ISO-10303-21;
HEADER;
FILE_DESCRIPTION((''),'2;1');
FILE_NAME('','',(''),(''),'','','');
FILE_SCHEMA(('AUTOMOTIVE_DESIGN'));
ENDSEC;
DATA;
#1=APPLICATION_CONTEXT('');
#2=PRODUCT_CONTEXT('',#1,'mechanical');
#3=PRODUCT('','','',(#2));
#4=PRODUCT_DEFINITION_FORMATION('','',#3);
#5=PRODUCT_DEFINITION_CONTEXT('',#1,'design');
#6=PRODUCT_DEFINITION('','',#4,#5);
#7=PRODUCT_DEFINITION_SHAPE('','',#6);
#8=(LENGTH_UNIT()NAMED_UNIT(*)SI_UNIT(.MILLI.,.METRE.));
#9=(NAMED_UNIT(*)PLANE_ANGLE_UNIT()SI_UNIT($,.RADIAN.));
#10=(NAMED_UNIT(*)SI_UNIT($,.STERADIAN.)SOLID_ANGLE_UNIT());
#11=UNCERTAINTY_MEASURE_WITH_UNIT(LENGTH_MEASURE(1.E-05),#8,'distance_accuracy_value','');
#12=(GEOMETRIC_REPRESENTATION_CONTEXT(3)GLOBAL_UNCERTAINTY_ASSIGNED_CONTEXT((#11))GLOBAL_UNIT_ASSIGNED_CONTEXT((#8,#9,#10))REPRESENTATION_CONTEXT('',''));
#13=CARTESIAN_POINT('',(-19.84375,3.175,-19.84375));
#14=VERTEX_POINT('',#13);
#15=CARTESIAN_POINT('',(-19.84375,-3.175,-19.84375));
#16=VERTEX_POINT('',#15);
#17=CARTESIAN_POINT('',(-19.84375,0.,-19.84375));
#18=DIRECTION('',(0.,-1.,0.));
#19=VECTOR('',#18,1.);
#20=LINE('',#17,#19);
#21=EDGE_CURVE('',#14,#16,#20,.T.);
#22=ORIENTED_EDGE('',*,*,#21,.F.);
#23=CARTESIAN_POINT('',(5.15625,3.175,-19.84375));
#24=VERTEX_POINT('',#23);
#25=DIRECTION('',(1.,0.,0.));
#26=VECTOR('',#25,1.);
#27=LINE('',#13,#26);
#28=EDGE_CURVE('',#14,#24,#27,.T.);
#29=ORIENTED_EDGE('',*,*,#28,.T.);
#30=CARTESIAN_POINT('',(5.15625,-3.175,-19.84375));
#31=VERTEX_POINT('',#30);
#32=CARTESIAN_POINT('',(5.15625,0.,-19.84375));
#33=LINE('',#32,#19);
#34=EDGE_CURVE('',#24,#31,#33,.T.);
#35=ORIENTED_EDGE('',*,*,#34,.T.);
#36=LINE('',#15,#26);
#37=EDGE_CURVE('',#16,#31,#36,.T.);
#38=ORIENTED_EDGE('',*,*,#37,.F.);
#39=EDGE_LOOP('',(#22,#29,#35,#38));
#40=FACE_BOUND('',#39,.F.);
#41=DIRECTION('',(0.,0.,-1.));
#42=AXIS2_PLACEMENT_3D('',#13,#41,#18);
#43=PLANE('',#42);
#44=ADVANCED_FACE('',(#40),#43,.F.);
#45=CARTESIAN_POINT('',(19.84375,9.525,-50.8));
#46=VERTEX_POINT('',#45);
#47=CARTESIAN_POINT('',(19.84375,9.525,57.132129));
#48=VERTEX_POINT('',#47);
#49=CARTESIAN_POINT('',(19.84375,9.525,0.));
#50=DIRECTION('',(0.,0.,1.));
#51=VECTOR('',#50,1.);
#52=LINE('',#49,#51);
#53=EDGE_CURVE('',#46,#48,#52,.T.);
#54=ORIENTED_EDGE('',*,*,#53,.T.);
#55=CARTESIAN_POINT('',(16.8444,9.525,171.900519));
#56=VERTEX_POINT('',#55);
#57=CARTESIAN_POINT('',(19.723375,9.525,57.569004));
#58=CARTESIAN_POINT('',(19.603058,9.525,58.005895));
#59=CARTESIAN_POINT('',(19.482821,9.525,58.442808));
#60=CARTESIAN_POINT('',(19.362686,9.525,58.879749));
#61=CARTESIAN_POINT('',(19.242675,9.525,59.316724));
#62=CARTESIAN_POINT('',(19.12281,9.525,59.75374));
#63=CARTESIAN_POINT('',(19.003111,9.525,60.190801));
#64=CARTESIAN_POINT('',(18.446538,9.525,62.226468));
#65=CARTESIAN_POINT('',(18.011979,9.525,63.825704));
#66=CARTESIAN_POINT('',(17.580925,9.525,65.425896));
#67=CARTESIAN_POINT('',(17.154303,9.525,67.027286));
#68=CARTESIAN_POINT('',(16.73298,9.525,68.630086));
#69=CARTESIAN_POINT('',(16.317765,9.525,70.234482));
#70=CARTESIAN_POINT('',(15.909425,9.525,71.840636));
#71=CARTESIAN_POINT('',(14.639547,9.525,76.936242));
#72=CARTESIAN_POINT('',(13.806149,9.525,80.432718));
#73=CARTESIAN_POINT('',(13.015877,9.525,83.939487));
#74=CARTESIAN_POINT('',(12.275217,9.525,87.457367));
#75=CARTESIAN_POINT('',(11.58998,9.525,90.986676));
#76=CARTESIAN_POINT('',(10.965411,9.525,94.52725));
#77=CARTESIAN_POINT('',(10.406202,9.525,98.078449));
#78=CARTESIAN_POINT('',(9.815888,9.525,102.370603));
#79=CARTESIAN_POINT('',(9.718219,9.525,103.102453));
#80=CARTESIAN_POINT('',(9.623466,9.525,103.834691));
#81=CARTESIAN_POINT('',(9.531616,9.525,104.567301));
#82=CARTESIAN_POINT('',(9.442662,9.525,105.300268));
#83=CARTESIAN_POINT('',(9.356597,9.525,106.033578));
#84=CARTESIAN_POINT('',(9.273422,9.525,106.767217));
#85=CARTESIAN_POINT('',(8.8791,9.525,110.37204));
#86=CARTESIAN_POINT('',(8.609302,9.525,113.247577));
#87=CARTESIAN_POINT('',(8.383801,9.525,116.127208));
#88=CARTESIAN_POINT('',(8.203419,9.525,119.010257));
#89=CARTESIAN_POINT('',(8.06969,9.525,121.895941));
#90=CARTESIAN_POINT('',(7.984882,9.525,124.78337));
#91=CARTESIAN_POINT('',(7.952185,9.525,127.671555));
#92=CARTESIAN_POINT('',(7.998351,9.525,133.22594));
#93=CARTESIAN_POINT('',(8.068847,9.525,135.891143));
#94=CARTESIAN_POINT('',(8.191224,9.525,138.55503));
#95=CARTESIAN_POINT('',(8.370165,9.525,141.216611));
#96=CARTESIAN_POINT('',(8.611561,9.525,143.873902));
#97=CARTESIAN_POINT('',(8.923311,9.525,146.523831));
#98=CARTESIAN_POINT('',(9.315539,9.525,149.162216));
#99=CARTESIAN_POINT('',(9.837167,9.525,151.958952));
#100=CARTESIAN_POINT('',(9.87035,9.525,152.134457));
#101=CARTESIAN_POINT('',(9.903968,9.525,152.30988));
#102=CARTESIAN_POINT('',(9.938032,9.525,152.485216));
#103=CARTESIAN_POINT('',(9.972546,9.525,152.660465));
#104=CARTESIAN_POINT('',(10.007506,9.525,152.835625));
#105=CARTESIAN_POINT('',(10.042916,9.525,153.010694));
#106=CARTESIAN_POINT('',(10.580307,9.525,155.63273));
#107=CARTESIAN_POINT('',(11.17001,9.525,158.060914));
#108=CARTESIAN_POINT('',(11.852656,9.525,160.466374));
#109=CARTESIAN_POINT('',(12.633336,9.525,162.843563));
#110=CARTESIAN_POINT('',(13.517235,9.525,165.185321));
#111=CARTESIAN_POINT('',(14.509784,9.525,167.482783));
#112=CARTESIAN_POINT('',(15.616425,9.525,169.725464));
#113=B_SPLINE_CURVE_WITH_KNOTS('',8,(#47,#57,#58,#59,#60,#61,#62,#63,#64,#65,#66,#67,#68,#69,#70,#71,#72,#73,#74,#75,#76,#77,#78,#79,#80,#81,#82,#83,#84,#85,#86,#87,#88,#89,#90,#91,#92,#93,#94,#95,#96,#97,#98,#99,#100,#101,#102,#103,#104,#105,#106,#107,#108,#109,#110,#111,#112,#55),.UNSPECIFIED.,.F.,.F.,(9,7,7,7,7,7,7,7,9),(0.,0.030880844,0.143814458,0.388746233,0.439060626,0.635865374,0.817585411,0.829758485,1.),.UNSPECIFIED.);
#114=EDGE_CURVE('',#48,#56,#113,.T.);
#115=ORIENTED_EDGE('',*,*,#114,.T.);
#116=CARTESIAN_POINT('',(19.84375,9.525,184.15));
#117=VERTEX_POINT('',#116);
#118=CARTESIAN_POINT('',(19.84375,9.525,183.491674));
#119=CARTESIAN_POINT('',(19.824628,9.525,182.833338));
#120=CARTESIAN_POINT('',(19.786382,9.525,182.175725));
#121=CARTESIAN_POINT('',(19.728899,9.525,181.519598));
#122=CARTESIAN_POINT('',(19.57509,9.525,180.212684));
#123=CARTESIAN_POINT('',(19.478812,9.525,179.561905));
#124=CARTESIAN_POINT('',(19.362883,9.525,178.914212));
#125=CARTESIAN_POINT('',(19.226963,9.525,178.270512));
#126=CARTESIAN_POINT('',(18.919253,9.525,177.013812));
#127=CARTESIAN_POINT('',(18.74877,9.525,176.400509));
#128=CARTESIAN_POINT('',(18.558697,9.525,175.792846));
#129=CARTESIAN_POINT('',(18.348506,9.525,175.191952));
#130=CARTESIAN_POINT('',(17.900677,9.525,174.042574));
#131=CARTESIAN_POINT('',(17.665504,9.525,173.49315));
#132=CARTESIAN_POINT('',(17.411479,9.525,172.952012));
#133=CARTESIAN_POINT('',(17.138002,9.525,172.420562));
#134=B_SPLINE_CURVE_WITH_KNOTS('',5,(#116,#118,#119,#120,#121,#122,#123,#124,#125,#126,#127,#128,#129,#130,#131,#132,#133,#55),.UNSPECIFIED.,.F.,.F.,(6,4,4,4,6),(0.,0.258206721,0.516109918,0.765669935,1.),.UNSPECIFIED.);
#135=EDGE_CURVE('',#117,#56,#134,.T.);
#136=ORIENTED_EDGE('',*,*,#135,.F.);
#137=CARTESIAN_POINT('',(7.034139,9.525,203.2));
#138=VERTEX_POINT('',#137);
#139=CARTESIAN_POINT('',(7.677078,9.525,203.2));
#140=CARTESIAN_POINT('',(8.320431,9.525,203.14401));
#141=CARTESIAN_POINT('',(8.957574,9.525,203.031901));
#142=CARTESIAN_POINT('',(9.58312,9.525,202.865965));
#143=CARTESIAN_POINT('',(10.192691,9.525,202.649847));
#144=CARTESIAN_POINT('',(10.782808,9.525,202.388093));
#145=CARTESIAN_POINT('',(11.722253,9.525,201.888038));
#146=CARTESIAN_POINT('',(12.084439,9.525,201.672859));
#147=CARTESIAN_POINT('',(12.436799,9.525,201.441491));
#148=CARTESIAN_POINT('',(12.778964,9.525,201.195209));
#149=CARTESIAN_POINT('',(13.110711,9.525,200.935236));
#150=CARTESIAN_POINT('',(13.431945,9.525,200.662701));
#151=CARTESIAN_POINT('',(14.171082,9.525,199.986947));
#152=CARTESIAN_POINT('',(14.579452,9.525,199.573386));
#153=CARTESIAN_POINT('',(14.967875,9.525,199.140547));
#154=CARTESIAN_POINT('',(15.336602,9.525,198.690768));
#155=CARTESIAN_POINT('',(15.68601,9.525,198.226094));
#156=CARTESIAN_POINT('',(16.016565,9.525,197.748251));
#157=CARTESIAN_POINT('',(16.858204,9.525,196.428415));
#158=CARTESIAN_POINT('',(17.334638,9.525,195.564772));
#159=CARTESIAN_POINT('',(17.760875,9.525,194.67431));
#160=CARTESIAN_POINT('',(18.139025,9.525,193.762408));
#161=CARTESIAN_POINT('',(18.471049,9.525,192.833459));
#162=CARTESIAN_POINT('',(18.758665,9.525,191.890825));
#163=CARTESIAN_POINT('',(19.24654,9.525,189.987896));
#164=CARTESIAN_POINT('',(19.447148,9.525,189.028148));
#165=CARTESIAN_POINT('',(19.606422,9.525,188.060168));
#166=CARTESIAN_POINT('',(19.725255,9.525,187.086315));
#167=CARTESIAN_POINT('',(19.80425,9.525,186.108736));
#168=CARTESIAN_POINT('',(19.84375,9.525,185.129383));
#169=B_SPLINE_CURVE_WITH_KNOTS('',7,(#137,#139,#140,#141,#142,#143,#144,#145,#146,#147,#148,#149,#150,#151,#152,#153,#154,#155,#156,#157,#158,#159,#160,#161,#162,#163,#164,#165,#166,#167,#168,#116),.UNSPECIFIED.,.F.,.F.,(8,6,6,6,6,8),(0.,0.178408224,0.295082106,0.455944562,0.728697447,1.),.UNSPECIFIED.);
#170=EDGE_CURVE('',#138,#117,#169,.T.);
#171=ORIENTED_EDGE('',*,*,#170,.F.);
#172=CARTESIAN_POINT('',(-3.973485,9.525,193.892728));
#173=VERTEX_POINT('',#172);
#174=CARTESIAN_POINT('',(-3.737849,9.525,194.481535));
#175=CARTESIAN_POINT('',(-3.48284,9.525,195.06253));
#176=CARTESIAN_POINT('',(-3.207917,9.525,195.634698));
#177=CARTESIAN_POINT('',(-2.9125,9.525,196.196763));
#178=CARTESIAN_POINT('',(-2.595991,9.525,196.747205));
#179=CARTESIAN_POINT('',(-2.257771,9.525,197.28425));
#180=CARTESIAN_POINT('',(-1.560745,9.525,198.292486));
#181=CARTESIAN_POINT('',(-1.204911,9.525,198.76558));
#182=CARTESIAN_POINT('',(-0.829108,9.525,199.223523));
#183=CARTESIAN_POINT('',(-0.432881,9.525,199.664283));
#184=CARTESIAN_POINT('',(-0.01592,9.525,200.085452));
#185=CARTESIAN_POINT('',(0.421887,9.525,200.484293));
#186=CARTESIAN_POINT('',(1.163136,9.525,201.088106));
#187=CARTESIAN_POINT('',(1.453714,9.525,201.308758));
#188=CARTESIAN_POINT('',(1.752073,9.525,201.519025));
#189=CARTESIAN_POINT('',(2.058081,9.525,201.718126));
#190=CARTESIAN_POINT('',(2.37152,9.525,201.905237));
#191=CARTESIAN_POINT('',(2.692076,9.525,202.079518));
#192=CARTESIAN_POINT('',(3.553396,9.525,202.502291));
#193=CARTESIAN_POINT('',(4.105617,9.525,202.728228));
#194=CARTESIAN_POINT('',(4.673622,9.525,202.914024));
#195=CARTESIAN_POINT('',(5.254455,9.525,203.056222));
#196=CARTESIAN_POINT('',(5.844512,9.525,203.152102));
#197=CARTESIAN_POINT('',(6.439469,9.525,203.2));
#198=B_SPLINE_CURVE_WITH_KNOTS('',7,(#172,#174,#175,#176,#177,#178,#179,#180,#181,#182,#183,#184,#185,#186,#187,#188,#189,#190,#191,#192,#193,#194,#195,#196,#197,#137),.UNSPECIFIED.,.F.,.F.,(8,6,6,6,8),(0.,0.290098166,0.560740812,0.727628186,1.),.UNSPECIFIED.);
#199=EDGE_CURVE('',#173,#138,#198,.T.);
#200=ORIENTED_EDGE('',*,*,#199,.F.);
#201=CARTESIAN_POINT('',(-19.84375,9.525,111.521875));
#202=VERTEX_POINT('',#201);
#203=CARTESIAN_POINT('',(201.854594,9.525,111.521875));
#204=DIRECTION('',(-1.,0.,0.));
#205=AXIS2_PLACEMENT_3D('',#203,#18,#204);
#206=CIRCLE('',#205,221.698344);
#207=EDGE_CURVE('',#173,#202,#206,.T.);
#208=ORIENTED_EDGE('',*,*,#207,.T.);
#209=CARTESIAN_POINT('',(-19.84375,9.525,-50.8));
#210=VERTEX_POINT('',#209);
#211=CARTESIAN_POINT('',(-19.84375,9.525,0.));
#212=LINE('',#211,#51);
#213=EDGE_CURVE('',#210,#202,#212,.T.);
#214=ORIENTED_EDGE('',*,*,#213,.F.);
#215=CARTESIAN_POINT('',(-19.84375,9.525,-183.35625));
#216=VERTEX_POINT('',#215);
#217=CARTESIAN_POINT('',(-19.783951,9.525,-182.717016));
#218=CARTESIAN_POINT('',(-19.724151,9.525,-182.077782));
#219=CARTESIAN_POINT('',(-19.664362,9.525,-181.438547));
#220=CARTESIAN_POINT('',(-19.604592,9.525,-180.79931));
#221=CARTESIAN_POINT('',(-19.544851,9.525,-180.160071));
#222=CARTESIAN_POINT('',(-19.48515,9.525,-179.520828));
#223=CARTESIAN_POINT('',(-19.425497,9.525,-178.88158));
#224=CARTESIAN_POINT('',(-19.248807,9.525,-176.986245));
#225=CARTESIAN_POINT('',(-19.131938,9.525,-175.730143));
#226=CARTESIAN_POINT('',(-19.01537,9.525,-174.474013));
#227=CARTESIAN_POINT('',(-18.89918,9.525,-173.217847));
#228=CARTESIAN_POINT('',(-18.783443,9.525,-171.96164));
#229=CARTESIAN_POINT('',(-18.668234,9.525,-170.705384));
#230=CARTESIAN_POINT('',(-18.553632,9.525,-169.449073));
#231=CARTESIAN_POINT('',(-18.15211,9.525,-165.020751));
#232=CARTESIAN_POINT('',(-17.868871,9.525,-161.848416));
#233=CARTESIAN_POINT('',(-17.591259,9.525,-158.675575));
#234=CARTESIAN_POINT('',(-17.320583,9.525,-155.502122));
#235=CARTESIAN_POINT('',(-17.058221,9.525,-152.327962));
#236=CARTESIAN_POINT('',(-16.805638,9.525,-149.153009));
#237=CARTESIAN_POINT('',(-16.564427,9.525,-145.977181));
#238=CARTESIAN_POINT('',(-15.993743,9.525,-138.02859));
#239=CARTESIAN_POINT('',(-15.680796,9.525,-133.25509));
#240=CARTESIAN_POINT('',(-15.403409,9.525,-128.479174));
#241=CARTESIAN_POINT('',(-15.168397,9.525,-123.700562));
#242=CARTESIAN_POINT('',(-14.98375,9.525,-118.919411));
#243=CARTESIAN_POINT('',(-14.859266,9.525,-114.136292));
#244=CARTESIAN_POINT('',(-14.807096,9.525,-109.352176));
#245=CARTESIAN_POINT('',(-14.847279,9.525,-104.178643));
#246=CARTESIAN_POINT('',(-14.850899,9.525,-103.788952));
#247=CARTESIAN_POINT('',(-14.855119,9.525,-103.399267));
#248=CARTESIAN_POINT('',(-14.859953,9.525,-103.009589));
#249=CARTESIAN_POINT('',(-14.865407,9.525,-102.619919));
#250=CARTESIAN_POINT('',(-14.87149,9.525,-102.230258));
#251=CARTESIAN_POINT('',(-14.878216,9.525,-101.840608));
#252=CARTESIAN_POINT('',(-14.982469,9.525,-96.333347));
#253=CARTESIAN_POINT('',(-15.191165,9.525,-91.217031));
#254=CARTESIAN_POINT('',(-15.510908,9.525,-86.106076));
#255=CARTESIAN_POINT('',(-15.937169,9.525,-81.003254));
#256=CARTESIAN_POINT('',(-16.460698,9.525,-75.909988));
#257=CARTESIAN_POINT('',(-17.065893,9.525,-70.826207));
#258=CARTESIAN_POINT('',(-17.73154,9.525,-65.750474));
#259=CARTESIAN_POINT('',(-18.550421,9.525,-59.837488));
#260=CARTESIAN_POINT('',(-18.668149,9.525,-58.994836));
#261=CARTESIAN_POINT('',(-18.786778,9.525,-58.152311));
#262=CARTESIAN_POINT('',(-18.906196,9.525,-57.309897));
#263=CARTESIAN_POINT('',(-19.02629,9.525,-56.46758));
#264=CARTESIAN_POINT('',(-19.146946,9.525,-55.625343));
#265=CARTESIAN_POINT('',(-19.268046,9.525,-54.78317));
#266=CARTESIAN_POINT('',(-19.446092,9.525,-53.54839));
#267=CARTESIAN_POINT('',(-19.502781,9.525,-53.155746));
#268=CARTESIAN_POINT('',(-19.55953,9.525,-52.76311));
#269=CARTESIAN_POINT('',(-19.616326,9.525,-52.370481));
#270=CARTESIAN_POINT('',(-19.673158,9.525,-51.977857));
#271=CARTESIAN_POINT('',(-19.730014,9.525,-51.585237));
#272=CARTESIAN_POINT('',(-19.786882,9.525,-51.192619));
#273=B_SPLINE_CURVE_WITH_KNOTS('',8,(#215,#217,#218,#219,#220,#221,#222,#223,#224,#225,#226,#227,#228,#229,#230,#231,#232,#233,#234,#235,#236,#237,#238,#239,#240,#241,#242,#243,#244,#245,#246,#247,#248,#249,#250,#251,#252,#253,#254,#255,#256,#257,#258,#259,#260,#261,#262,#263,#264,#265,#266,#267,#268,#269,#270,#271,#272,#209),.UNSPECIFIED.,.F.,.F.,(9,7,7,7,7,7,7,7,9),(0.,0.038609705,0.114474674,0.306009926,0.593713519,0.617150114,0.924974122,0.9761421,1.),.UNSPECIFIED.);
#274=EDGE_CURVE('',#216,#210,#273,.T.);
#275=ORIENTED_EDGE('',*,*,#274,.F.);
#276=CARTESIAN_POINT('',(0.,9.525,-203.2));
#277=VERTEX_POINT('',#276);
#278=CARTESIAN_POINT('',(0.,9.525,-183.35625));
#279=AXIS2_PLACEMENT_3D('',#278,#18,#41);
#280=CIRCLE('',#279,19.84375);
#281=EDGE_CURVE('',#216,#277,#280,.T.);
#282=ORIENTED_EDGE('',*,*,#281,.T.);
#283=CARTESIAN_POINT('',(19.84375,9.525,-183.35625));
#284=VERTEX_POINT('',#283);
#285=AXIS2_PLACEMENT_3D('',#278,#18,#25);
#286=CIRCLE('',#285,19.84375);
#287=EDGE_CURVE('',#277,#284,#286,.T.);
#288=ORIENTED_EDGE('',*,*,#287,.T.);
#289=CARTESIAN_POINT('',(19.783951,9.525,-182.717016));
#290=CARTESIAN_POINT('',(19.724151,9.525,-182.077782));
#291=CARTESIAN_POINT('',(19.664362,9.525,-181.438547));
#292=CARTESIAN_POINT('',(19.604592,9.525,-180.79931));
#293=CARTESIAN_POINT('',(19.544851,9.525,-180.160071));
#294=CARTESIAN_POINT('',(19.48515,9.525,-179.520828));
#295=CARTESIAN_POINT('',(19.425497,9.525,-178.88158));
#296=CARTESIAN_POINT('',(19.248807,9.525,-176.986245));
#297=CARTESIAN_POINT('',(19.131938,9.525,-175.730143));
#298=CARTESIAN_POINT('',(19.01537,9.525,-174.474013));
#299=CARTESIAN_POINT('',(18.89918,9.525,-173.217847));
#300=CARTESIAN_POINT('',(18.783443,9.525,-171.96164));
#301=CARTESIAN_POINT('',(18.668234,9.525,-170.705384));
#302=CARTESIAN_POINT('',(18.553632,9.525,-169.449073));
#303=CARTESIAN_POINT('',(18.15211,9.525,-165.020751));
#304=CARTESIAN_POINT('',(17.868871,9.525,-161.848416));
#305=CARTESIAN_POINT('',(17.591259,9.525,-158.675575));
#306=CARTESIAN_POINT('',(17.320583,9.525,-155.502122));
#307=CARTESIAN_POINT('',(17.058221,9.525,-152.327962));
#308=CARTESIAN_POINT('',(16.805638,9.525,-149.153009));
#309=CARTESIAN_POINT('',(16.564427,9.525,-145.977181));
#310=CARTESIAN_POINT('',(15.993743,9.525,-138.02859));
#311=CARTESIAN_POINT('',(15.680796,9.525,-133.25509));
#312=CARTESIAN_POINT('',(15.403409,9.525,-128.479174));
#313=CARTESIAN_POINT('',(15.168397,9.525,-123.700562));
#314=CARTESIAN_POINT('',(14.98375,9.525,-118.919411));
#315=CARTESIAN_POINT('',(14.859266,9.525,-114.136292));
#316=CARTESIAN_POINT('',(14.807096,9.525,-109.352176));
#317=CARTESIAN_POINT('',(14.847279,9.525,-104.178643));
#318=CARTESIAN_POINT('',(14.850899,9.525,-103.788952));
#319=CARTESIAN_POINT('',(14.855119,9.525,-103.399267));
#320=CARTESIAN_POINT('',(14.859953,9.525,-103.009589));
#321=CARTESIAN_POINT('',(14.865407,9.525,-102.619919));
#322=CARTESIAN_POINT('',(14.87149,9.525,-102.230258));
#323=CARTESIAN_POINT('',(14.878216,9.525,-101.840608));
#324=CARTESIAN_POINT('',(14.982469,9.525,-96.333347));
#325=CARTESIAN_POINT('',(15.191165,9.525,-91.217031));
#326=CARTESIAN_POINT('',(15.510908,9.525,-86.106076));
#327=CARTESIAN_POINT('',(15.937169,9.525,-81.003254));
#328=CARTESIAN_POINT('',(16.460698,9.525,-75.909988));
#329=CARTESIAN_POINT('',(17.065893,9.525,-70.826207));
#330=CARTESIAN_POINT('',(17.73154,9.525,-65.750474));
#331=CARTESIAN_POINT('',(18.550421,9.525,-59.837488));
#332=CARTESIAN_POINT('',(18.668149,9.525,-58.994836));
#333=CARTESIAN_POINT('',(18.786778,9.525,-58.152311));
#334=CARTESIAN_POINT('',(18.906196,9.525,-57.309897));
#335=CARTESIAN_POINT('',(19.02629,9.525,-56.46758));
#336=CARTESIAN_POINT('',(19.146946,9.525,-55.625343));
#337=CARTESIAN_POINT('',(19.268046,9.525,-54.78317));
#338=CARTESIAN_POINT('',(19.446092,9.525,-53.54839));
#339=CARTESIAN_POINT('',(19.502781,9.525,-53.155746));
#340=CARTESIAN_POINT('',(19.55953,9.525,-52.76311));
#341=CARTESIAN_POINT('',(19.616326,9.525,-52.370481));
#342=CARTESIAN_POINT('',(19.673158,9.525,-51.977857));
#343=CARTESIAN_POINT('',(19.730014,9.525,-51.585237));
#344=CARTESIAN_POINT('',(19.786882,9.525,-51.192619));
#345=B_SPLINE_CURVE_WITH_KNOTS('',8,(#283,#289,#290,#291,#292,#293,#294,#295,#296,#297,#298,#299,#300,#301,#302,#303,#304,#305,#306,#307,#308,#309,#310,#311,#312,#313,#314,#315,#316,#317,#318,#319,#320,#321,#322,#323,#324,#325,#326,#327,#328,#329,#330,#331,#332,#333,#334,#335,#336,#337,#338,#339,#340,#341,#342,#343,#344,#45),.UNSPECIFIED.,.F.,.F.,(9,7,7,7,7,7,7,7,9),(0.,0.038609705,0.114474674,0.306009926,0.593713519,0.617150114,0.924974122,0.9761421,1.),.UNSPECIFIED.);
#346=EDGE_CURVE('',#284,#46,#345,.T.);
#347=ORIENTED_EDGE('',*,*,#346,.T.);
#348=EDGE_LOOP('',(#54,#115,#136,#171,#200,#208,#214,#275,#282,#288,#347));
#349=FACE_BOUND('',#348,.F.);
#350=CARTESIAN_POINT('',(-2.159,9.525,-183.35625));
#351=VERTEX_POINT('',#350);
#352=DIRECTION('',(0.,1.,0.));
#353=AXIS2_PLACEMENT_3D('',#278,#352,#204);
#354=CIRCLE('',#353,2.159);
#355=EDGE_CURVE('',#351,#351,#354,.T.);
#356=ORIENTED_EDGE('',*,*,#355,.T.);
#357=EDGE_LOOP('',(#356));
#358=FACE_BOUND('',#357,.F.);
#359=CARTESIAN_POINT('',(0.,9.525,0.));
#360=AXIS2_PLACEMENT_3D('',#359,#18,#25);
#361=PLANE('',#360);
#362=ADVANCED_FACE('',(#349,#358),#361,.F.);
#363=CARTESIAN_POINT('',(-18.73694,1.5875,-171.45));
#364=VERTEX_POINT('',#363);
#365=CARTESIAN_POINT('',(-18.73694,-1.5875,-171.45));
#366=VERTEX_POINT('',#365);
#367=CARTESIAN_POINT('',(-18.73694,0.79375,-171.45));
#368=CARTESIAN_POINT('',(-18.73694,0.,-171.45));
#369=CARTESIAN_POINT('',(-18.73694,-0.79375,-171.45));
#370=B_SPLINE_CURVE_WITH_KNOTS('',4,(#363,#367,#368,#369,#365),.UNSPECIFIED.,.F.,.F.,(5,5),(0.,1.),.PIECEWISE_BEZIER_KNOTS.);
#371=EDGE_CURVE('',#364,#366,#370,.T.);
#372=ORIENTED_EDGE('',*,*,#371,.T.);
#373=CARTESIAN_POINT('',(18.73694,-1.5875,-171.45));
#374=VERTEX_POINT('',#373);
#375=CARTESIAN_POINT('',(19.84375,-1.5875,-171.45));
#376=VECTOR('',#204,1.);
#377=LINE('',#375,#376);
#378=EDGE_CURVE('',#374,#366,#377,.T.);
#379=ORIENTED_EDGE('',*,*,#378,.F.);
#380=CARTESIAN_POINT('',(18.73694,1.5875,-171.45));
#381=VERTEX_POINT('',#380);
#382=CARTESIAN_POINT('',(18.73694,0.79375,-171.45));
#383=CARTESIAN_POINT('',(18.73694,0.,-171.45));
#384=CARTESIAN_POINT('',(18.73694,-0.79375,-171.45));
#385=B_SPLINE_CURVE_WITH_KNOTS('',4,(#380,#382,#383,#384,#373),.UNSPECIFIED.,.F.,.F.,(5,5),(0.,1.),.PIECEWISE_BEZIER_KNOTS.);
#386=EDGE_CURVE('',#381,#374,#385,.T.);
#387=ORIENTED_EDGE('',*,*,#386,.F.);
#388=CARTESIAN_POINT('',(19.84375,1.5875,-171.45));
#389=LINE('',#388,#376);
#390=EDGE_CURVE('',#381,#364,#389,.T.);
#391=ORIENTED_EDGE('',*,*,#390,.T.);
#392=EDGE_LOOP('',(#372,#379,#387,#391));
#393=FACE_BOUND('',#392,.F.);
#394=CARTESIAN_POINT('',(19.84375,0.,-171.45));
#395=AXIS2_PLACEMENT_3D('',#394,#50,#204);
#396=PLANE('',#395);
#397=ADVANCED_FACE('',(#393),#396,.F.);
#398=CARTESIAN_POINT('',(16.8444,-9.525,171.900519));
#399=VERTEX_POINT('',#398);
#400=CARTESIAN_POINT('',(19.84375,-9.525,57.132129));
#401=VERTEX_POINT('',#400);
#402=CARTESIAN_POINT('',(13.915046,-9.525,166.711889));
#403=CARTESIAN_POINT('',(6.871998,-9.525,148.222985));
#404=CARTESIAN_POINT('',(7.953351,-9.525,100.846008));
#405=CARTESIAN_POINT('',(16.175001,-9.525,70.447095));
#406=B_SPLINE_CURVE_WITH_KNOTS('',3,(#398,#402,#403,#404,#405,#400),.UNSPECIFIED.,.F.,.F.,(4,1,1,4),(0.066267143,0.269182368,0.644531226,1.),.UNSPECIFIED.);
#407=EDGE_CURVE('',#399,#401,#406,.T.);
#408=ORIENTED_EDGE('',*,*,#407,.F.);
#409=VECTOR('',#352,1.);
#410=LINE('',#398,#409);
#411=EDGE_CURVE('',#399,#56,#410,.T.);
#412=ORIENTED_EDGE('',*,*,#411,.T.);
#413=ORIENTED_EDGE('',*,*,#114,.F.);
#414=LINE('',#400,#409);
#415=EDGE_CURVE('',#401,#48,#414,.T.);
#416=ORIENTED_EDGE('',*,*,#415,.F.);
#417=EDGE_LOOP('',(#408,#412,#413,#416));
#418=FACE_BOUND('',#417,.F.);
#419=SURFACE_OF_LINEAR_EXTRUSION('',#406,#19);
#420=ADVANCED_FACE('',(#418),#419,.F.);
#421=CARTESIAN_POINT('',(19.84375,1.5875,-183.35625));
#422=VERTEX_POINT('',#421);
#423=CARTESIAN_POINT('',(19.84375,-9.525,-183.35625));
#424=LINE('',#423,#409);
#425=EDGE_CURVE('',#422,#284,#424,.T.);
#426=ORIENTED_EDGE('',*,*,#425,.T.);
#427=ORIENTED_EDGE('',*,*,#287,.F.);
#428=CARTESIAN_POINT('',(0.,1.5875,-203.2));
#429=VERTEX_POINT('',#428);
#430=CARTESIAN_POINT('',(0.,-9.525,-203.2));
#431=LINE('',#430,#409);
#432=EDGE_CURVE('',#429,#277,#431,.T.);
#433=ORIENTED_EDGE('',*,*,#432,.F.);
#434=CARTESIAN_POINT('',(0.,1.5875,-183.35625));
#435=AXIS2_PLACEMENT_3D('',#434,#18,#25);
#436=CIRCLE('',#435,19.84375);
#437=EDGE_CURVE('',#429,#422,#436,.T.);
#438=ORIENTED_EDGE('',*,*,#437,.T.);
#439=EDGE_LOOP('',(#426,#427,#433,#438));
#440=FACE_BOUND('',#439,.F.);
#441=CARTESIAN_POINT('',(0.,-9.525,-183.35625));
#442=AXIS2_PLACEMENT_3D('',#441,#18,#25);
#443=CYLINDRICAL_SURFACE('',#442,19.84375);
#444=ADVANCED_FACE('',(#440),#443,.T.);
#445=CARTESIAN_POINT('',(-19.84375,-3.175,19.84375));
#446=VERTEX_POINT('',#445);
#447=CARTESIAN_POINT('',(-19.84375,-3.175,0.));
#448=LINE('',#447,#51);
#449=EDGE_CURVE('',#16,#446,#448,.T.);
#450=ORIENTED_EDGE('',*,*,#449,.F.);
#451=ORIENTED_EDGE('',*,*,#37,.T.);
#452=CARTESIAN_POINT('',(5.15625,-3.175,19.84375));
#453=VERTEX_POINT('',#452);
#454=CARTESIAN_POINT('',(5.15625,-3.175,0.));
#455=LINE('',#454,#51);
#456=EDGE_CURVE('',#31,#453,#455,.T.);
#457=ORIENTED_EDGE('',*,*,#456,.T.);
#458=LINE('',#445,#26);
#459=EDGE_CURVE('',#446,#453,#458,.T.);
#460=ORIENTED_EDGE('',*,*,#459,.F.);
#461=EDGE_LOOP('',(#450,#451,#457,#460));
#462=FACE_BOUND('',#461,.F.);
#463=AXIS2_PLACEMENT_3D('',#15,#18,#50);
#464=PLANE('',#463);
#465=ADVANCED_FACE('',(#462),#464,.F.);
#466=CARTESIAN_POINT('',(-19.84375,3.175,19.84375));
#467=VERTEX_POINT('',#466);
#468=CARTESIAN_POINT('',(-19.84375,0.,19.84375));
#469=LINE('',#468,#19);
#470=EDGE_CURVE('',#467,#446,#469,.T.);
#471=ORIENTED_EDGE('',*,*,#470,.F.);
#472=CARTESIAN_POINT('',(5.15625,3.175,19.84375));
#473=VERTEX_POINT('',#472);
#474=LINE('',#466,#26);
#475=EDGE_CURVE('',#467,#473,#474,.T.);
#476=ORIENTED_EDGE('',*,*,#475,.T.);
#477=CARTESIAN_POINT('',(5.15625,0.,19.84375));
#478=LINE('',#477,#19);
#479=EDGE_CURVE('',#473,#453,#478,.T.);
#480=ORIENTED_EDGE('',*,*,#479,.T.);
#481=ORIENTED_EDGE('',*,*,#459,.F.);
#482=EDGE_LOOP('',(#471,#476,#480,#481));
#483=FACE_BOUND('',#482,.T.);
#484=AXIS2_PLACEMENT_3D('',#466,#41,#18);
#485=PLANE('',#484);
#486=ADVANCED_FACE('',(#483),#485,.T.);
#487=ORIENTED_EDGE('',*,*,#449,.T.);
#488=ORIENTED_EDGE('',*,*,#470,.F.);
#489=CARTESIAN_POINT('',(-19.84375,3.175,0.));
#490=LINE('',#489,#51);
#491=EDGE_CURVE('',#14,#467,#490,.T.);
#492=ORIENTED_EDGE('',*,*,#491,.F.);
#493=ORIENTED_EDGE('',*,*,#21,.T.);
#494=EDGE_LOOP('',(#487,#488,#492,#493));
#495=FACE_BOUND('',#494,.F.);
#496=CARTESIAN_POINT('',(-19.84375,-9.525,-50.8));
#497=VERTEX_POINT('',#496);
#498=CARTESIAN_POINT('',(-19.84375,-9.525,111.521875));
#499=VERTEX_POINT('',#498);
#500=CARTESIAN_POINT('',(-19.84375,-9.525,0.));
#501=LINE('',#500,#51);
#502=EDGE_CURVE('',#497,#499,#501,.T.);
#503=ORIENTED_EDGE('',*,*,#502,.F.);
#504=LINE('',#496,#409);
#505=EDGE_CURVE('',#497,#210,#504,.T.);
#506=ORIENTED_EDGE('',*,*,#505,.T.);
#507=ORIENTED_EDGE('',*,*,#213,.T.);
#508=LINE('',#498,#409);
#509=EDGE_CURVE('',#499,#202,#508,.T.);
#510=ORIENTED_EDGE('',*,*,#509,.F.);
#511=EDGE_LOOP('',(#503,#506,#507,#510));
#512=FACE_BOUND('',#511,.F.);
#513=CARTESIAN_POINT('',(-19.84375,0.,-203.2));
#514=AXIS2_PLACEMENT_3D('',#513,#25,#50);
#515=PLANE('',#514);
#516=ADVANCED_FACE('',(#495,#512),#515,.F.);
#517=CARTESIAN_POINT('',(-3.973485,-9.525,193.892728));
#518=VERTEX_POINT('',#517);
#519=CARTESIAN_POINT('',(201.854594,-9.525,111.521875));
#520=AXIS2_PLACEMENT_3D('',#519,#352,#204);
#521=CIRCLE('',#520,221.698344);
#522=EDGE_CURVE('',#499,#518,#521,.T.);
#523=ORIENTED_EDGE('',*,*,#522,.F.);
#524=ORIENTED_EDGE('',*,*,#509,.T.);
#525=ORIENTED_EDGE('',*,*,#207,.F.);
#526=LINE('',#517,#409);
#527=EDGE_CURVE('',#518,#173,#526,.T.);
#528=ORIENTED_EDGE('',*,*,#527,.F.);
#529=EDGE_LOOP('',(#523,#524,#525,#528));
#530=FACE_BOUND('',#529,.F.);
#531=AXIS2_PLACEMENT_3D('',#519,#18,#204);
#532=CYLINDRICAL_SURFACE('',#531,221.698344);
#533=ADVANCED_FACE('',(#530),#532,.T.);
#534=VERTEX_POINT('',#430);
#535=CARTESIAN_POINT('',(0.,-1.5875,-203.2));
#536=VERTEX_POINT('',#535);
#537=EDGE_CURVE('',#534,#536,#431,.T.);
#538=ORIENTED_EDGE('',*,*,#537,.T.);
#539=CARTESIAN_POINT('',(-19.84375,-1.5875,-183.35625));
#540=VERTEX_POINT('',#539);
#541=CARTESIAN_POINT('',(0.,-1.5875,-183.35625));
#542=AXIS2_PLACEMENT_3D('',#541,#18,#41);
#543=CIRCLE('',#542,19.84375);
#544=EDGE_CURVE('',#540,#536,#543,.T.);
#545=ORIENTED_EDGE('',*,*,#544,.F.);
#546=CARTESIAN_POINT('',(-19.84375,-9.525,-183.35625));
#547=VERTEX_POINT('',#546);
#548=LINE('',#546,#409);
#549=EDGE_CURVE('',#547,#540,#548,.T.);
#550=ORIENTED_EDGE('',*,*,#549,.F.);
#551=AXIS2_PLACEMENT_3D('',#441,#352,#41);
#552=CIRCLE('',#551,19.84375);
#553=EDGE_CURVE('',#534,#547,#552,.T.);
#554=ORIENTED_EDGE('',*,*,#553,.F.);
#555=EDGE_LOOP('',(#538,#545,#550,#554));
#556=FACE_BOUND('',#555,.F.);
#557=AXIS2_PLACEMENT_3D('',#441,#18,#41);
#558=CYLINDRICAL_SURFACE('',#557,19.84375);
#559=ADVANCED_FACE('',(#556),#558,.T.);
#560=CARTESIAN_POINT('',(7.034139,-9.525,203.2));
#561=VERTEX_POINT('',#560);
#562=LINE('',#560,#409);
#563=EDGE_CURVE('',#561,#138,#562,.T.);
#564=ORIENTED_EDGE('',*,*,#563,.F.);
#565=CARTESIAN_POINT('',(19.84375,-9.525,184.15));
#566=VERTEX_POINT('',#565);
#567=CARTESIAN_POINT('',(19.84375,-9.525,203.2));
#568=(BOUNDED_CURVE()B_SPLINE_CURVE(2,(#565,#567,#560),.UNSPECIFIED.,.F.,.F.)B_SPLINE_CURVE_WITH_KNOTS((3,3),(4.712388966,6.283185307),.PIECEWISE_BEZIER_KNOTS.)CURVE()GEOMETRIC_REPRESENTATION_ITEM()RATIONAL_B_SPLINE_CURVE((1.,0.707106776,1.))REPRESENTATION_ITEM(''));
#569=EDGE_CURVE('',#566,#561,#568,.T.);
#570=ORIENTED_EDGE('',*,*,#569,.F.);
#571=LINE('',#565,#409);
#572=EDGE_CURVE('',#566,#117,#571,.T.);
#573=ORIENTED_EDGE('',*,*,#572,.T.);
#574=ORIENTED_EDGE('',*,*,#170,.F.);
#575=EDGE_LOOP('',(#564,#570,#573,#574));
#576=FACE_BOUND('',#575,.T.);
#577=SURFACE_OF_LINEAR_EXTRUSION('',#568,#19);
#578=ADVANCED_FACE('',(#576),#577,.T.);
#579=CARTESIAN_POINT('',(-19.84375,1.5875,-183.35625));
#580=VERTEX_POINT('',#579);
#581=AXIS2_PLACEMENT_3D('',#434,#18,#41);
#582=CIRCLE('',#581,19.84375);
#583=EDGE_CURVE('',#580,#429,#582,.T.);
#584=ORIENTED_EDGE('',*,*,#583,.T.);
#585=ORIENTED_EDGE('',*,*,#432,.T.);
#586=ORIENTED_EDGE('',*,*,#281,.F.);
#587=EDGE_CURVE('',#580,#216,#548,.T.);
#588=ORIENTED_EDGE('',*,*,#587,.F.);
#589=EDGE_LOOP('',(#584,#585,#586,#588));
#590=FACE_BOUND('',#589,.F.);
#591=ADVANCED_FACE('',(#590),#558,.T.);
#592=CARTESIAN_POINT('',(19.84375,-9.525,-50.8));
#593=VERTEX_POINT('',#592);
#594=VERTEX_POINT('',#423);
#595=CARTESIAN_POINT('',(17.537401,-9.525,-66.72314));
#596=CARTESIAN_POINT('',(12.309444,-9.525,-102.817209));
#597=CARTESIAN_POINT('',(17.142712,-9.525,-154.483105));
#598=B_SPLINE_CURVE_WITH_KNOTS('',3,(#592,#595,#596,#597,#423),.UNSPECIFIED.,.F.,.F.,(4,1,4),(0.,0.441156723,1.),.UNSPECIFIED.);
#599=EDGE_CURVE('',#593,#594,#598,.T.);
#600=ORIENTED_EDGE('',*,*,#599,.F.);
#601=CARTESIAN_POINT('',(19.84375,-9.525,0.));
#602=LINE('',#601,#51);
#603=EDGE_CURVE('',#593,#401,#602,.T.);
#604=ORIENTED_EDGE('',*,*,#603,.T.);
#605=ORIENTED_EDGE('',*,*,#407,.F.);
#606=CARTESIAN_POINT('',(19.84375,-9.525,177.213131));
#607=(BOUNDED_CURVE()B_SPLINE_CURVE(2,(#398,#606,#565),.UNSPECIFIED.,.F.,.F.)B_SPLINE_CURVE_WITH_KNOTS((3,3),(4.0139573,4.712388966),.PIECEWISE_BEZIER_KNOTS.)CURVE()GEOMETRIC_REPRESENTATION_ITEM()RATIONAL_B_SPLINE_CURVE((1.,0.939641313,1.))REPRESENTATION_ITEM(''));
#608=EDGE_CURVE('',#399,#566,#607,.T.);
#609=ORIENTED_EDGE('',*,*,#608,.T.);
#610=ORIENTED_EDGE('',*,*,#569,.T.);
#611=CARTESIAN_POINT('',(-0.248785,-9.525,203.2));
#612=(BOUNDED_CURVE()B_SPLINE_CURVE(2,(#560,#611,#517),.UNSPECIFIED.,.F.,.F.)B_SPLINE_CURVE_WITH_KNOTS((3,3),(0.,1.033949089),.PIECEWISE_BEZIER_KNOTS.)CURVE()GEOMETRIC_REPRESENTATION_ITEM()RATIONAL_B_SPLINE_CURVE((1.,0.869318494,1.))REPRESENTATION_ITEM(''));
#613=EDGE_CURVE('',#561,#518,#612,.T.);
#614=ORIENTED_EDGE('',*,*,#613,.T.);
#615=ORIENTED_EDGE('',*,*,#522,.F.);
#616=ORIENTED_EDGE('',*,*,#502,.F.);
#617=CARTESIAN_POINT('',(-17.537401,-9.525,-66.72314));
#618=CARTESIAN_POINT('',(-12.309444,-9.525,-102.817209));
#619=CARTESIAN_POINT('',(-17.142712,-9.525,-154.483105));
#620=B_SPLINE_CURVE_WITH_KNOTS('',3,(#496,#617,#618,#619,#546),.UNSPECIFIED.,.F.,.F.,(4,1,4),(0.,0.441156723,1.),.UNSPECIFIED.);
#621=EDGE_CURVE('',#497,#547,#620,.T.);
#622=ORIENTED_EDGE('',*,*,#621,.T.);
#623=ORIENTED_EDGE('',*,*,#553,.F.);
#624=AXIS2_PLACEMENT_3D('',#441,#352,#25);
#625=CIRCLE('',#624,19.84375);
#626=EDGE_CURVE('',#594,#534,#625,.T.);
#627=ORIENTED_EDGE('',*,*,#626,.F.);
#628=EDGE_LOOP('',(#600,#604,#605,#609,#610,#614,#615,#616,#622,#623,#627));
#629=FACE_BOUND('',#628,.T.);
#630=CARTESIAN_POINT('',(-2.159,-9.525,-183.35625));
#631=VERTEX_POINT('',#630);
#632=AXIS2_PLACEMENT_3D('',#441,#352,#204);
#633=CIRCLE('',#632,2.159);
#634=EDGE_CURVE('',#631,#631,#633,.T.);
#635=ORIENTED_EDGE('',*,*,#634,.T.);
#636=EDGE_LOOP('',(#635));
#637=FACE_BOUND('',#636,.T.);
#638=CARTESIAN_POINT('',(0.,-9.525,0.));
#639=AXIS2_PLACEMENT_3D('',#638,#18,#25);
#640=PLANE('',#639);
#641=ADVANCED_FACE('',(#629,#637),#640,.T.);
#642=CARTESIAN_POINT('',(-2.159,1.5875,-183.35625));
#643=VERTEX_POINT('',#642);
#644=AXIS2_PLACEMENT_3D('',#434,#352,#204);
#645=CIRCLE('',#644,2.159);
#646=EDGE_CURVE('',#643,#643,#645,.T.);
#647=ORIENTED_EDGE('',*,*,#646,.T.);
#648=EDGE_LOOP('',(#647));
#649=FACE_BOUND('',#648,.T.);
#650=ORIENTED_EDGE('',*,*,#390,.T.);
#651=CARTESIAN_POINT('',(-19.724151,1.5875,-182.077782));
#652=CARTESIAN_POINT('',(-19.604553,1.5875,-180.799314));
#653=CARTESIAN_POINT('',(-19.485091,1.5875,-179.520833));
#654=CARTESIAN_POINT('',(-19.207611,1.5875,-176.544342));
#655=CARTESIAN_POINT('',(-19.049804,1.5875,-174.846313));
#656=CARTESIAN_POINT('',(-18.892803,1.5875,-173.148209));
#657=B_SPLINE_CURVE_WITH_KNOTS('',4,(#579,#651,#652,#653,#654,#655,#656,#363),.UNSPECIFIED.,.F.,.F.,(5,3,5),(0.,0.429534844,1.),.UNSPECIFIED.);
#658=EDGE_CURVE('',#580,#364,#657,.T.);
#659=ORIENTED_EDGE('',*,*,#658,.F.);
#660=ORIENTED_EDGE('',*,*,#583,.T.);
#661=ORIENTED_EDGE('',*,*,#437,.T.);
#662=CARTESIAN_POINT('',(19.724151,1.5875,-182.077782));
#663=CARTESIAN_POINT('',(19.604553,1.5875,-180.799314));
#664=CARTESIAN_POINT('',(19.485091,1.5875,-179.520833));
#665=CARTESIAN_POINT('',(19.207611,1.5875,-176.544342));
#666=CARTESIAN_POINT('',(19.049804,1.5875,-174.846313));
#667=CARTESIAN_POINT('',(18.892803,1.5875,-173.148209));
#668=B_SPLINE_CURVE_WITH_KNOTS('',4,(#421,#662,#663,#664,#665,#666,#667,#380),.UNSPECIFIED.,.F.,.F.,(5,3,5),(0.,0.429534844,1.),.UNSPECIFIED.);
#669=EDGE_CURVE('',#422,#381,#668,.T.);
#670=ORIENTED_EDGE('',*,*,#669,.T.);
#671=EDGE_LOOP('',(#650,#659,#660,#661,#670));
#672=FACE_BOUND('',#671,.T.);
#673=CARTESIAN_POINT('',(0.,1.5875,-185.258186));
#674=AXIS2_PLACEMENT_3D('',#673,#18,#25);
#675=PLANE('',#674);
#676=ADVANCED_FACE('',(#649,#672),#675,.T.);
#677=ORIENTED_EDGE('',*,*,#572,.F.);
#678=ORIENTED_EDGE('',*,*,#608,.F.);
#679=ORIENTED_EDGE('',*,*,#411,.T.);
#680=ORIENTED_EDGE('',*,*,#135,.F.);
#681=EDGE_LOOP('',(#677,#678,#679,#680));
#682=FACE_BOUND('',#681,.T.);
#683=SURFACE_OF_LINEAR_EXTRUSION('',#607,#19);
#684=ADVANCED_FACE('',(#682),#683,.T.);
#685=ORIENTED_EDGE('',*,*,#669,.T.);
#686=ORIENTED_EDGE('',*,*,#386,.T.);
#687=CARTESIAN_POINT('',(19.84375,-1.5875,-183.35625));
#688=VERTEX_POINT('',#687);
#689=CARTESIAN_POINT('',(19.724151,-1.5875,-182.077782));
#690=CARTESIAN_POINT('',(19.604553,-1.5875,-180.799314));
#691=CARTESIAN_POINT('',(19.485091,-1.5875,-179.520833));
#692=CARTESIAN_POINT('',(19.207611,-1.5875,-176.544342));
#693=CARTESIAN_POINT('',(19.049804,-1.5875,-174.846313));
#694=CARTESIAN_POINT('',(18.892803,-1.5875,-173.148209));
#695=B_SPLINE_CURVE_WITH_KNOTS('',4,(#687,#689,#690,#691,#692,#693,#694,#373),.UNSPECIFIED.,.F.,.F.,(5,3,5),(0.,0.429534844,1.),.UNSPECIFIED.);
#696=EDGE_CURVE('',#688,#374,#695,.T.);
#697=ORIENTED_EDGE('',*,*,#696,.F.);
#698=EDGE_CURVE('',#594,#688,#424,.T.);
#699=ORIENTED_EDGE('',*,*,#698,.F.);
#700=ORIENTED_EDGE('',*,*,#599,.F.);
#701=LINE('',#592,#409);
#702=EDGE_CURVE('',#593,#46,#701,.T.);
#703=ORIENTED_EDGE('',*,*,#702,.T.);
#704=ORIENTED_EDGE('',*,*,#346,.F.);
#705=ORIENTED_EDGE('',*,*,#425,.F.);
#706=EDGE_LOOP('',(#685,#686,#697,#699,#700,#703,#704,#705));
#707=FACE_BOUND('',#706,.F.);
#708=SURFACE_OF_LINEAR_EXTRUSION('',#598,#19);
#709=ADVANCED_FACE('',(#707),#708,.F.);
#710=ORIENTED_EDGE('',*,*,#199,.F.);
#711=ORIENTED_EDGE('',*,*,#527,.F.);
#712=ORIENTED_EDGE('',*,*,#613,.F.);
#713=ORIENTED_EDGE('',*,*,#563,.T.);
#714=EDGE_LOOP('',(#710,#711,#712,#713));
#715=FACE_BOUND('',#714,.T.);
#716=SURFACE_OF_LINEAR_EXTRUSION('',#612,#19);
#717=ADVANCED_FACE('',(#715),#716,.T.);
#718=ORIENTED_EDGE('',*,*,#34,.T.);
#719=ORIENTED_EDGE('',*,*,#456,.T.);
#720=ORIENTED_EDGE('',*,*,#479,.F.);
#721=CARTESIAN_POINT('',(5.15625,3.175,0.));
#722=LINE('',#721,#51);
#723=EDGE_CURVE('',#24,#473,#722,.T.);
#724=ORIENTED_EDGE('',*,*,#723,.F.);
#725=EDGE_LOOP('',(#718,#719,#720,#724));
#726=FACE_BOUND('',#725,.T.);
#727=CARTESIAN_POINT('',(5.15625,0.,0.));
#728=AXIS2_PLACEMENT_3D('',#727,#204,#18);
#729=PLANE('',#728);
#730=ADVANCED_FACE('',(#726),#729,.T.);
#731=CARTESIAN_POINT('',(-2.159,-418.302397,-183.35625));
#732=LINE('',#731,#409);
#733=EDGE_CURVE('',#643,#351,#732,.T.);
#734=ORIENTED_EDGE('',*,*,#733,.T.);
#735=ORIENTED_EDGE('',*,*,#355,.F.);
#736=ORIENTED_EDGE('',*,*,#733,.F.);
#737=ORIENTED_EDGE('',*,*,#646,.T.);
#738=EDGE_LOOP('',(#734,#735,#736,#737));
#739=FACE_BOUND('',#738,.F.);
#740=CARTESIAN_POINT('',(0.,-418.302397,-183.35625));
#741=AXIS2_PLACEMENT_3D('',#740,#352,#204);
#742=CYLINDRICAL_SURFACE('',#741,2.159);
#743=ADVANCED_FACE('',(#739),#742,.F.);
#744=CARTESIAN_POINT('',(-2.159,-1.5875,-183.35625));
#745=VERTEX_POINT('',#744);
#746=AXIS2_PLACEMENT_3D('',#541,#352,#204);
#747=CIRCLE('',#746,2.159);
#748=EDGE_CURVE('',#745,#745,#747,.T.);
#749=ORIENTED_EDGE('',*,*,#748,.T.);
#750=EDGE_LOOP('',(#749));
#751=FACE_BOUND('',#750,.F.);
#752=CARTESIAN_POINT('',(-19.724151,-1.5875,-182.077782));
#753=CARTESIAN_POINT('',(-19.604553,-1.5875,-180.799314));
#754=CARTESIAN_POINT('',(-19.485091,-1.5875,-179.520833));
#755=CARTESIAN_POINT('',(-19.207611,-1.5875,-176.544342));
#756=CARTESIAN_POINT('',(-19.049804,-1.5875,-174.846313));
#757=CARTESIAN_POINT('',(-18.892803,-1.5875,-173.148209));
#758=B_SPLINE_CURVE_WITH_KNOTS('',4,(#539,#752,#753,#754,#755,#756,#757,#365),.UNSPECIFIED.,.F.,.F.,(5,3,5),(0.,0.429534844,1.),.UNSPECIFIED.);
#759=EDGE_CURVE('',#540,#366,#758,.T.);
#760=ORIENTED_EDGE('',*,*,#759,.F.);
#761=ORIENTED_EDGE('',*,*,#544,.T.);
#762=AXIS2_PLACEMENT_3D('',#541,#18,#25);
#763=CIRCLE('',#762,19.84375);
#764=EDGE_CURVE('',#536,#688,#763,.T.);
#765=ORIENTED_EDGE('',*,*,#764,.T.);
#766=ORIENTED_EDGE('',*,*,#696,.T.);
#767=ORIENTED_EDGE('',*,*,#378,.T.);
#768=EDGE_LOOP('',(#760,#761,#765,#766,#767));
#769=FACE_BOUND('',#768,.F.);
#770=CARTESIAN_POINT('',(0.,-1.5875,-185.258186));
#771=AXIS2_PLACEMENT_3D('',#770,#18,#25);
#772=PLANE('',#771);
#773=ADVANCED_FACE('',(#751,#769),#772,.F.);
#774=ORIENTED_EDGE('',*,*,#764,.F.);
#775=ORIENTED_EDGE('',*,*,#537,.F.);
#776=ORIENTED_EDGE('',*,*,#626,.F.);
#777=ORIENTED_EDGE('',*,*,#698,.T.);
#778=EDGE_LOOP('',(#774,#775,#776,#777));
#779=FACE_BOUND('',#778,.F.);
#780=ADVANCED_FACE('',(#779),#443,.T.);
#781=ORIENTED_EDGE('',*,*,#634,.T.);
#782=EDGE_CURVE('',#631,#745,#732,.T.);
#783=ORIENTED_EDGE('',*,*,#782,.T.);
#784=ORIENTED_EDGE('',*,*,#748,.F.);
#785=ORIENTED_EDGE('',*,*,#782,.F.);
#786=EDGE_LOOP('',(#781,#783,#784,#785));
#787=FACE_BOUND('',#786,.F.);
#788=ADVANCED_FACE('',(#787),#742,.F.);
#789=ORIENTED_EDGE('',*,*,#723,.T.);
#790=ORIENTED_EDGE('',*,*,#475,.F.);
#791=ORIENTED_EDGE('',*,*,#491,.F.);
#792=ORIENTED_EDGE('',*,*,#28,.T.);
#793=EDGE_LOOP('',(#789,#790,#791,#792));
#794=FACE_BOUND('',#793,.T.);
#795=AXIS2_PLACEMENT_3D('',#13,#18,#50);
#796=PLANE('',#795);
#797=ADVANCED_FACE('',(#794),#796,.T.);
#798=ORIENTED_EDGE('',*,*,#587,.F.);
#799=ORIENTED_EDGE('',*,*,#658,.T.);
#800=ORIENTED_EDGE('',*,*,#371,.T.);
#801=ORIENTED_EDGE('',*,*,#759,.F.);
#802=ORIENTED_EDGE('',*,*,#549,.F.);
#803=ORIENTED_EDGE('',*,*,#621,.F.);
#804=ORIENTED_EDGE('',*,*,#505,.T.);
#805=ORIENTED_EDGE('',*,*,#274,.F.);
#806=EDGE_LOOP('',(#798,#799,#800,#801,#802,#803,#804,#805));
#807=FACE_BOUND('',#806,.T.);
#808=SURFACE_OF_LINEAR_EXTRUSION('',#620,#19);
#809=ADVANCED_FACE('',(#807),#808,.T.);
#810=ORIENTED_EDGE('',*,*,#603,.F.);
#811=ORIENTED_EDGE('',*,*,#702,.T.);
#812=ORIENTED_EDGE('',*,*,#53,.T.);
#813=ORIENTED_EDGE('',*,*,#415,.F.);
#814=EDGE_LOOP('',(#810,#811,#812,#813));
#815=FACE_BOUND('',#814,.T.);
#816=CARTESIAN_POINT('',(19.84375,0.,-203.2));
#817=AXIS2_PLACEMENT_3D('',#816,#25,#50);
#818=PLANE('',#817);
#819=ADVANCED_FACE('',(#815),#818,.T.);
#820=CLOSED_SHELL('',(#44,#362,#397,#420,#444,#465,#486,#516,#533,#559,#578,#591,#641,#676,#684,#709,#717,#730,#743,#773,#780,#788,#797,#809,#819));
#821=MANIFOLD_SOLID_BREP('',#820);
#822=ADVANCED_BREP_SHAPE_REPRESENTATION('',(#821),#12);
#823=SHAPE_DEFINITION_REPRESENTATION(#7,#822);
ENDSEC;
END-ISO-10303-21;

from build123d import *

# Parameters (mm, degrees)
F0_W     = 39.6875
F0_H     = 406.4
F1_DEPTH = 9.525
F2_W     = 6.35
F2_H     = 39.6875
F3_DEPTH = 25
F5_DEPTH = 19.051
F7_DEPTH = 1.5875
F9_D     = 4.318


with BuildPart() as f1:
    # F0 (on Front) → F1 (new body, symmetric)
    with BuildSketch(Plane.XZ):
        Rectangle(F0_W, F0_H)
    extrude(amount=F1_DEPTH, both=True)

    # F2 (on face) → F3 (cut)
    with BuildSketch(Plane(origin=(-19.84375, 0, 0), x_dir=(0, -1, 0), z_dir=(-1, 0, 0))):
        Rectangle(F2_W, F2_H)
    extrude(amount=-F3_DEPTH, mode=Mode.SUBTRACT)

    # F4 (on face) → F5 (cut, through all)
    with BuildSketch(Plane.XZ.offset(9.525)):
        with BuildLine():
            Line((7.0341385432, 203.2), (-19.84375, 203.2))
            Line((-19.84375, 203.2), (-19.84375, 111.521875))
            ThreePointArc((-19.84375, 111.521875), (-15.8400316853, 153.4647609056), (-3.9734854925, 193.8927279568))
            add(Edge.make_bspline(
                [(7.0341385432, 203.2), (-0.2487850546, 203.2), (-3.9734854925, 193.8927279568)],
                knots=[0, 0, 0, 1.0339490894, 1.0339490894, 1.0339490894], degree=2, weights=[1, 0.8693184943, 1]))
        make_face()
        with BuildLine():
            Line((19.84375, 203.2), (7.0341385432, 203.2))
            add(Edge.make_bspline(
                [(19.84375, 184.1499997199), (19.8437501883, 203.2), (7.0341385432, 203.2)],
                knots=[4.7123889657, 4.7123889657, 4.7123889657, 6.2831853072, 6.2831853072, 6.2831853072], degree=2, weights=[1, 0.707106776, 1]))
            Line((19.84375, 184.1499997199), (19.84375, 203.2))
        make_face()
        with BuildLine():
            Line((19.84375, 176.5695613803), (19.84375, 184.1499997199))
            add(Edge.make_bspline(
                [(16.84439979, 171.9005189458), (19.8437499314, 177.2131309179), (19.84375, 184.1499997199)],
                knots=[4.0139573004, 4.0139573004, 4.0139573004, 4.7123889657, 4.7123889657, 4.7123889657], degree=2, weights=[1, 0.9396413133, 1]))
            add(Edge.make_bspline(
                [(19.84375, 176.5695613803), (18.8065478073, 175.1509160959), (17.8010548966, 173.5949984606), (16.84439979, 171.9005189458)],
                knots=[0, 0, 0, 0, 0.0662671427, 0.0662671427, 0.0662671427, 0.0662671427], degree=3))
        make_face()
        with BuildLine():
            add(Edge.make_bspline(
                [(19.84375, 176.5695613803), (18.8065478073, 175.1509160959), (17.8010548966, 173.5949984606), (16.84439979, 171.9005189458)],
                knots=[0, 0, 0, 0, 0.0662671427, 0.0662671427, 0.0662671427, 0.0662671427], degree=3))
            add(Edge.make_bspline(
                [(16.84439979, 171.9005189458), (13.9150462786, 166.7118888088), (6.871998352, 148.2229851045), (7.9533512774, 100.8460076909), (16.1750007742, 70.447095167), (19.84375, 57.1321291334)],
                knots=[0.0662671427, 0.0662671427, 0.0662671427, 0.0662671427, 0.2691823685, 0.6445312257, 1, 1, 1, 1], degree=3))
            Line((19.84375, 57.1321291334), (19.84375, 176.5695613803))
        make_face()
        with BuildLine():
            add(Edge.make_bspline(
                [(-19.84375, -50.8), (-17.5374013822, -66.7231403213), (-12.3094439018, -102.8172091965), (-17.1427124069, -154.4831051715), (-19.84375, -183.35625)],
                knots=[0, 0, 0, 0, 0.4411567231, 1, 1, 1, 1], degree=3))
            Line((-19.84375, -50.8), (-19.84375, -183.35625))
        make_face()
        with BuildLine():
            ThreePointArc((0, -203.2), (-14.0316501892, -197.3879001892), (-19.84375, -183.35625))
            Line((-19.84375, -183.35625), (-19.84375, -203.2))
            Line((-19.84375, -203.2), (0, -203.2))
        make_face()
        with BuildLine():
            Line((19.84375, -183.35625), (19.84375, -50.8))
            add(Edge.make_bspline(
                [(19.84375, -50.8), (17.5374013822, -66.7231403213), (12.3094439018, -102.8172091965), (17.1427124069, -154.4831051715), (19.84375, -183.35625)],
                knots=[0, 0, 0, 0, 0.4411567231, 1, 1, 1, 1], degree=3))
        make_face()
        with BuildLine():
            ThreePointArc((19.84375, -183.35625), (14.0316501892, -197.3879001892), (0, -203.2))
            Line((0, -203.2), (19.84375, -203.2))
            Line((19.84375, -203.2), (19.84375, -183.35625))
        make_face()
    extrude(amount=-F5_DEPTH, mode=Mode.SUBTRACT)

    # F6 (on Front) → F7 (cut, symmetric)
    with BuildSketch(Plane.XZ):
        with BuildLine():
            Line((15.875, -171.45), (-15.875, -171.45))
            ThreePointArc((-15.875, -171.45), (-18.8254341957, -177.0811052681), (-19.84375, -183.35625))
            ThreePointArc((-19.84375, -183.35625), (-14.0316501892, -197.3879001892), (0, -203.2))
            ThreePointArc((0, -203.2), (14.0316501892, -197.3879001892), (19.84375, -183.35625))
            ThreePointArc((19.84375, -183.35625), (18.8254341957, -177.0811052681), (15.875, -171.45))
        make_face()
        with BuildLine():
            ThreePointArc((-19.84375, -183.35625), (-18.8254341957, -177.0811052681), (-15.875, -171.45))
            Line((-15.875, -171.45), (-19.84375, -171.45))
            Line((-19.84375, -171.45), (-19.84375, -183.35625))
        make_face()
        with BuildLine():
            ThreePointArc((0, -203.2), (-14.0316501892, -197.3879001892), (-19.84375, -183.35625))
            Line((-19.84375, -183.35625), (-19.84375, -203.2))
            Line((-19.84375, -203.2), (0, -203.2))
        make_face()
        with BuildLine():
            Line((19.84375, -171.45), (15.875, -171.45))
            ThreePointArc((15.875, -171.45), (18.8254341957, -177.0811052681), (19.84375, -183.35625))
            Line((19.84375, -183.35625), (19.84375, -171.45))
        make_face()
        with BuildLine():
            ThreePointArc((19.84375, -183.35625), (14.0316501892, -197.3879001892), (0, -203.2))
            Line((0, -203.2), (19.84375, -203.2))
            Line((19.84375, -203.2), (19.84375, -183.35625))
        make_face()
    extrude(amount=F7_DEPTH, both=True, mode=Mode.SUBTRACT)

    # F9 (through all)
    with Locations(Plane.XZ.offset(9.525)):
        with Locations((0, -183.35625)):
            Hole(F9_D / 2)


solid = f1.part
